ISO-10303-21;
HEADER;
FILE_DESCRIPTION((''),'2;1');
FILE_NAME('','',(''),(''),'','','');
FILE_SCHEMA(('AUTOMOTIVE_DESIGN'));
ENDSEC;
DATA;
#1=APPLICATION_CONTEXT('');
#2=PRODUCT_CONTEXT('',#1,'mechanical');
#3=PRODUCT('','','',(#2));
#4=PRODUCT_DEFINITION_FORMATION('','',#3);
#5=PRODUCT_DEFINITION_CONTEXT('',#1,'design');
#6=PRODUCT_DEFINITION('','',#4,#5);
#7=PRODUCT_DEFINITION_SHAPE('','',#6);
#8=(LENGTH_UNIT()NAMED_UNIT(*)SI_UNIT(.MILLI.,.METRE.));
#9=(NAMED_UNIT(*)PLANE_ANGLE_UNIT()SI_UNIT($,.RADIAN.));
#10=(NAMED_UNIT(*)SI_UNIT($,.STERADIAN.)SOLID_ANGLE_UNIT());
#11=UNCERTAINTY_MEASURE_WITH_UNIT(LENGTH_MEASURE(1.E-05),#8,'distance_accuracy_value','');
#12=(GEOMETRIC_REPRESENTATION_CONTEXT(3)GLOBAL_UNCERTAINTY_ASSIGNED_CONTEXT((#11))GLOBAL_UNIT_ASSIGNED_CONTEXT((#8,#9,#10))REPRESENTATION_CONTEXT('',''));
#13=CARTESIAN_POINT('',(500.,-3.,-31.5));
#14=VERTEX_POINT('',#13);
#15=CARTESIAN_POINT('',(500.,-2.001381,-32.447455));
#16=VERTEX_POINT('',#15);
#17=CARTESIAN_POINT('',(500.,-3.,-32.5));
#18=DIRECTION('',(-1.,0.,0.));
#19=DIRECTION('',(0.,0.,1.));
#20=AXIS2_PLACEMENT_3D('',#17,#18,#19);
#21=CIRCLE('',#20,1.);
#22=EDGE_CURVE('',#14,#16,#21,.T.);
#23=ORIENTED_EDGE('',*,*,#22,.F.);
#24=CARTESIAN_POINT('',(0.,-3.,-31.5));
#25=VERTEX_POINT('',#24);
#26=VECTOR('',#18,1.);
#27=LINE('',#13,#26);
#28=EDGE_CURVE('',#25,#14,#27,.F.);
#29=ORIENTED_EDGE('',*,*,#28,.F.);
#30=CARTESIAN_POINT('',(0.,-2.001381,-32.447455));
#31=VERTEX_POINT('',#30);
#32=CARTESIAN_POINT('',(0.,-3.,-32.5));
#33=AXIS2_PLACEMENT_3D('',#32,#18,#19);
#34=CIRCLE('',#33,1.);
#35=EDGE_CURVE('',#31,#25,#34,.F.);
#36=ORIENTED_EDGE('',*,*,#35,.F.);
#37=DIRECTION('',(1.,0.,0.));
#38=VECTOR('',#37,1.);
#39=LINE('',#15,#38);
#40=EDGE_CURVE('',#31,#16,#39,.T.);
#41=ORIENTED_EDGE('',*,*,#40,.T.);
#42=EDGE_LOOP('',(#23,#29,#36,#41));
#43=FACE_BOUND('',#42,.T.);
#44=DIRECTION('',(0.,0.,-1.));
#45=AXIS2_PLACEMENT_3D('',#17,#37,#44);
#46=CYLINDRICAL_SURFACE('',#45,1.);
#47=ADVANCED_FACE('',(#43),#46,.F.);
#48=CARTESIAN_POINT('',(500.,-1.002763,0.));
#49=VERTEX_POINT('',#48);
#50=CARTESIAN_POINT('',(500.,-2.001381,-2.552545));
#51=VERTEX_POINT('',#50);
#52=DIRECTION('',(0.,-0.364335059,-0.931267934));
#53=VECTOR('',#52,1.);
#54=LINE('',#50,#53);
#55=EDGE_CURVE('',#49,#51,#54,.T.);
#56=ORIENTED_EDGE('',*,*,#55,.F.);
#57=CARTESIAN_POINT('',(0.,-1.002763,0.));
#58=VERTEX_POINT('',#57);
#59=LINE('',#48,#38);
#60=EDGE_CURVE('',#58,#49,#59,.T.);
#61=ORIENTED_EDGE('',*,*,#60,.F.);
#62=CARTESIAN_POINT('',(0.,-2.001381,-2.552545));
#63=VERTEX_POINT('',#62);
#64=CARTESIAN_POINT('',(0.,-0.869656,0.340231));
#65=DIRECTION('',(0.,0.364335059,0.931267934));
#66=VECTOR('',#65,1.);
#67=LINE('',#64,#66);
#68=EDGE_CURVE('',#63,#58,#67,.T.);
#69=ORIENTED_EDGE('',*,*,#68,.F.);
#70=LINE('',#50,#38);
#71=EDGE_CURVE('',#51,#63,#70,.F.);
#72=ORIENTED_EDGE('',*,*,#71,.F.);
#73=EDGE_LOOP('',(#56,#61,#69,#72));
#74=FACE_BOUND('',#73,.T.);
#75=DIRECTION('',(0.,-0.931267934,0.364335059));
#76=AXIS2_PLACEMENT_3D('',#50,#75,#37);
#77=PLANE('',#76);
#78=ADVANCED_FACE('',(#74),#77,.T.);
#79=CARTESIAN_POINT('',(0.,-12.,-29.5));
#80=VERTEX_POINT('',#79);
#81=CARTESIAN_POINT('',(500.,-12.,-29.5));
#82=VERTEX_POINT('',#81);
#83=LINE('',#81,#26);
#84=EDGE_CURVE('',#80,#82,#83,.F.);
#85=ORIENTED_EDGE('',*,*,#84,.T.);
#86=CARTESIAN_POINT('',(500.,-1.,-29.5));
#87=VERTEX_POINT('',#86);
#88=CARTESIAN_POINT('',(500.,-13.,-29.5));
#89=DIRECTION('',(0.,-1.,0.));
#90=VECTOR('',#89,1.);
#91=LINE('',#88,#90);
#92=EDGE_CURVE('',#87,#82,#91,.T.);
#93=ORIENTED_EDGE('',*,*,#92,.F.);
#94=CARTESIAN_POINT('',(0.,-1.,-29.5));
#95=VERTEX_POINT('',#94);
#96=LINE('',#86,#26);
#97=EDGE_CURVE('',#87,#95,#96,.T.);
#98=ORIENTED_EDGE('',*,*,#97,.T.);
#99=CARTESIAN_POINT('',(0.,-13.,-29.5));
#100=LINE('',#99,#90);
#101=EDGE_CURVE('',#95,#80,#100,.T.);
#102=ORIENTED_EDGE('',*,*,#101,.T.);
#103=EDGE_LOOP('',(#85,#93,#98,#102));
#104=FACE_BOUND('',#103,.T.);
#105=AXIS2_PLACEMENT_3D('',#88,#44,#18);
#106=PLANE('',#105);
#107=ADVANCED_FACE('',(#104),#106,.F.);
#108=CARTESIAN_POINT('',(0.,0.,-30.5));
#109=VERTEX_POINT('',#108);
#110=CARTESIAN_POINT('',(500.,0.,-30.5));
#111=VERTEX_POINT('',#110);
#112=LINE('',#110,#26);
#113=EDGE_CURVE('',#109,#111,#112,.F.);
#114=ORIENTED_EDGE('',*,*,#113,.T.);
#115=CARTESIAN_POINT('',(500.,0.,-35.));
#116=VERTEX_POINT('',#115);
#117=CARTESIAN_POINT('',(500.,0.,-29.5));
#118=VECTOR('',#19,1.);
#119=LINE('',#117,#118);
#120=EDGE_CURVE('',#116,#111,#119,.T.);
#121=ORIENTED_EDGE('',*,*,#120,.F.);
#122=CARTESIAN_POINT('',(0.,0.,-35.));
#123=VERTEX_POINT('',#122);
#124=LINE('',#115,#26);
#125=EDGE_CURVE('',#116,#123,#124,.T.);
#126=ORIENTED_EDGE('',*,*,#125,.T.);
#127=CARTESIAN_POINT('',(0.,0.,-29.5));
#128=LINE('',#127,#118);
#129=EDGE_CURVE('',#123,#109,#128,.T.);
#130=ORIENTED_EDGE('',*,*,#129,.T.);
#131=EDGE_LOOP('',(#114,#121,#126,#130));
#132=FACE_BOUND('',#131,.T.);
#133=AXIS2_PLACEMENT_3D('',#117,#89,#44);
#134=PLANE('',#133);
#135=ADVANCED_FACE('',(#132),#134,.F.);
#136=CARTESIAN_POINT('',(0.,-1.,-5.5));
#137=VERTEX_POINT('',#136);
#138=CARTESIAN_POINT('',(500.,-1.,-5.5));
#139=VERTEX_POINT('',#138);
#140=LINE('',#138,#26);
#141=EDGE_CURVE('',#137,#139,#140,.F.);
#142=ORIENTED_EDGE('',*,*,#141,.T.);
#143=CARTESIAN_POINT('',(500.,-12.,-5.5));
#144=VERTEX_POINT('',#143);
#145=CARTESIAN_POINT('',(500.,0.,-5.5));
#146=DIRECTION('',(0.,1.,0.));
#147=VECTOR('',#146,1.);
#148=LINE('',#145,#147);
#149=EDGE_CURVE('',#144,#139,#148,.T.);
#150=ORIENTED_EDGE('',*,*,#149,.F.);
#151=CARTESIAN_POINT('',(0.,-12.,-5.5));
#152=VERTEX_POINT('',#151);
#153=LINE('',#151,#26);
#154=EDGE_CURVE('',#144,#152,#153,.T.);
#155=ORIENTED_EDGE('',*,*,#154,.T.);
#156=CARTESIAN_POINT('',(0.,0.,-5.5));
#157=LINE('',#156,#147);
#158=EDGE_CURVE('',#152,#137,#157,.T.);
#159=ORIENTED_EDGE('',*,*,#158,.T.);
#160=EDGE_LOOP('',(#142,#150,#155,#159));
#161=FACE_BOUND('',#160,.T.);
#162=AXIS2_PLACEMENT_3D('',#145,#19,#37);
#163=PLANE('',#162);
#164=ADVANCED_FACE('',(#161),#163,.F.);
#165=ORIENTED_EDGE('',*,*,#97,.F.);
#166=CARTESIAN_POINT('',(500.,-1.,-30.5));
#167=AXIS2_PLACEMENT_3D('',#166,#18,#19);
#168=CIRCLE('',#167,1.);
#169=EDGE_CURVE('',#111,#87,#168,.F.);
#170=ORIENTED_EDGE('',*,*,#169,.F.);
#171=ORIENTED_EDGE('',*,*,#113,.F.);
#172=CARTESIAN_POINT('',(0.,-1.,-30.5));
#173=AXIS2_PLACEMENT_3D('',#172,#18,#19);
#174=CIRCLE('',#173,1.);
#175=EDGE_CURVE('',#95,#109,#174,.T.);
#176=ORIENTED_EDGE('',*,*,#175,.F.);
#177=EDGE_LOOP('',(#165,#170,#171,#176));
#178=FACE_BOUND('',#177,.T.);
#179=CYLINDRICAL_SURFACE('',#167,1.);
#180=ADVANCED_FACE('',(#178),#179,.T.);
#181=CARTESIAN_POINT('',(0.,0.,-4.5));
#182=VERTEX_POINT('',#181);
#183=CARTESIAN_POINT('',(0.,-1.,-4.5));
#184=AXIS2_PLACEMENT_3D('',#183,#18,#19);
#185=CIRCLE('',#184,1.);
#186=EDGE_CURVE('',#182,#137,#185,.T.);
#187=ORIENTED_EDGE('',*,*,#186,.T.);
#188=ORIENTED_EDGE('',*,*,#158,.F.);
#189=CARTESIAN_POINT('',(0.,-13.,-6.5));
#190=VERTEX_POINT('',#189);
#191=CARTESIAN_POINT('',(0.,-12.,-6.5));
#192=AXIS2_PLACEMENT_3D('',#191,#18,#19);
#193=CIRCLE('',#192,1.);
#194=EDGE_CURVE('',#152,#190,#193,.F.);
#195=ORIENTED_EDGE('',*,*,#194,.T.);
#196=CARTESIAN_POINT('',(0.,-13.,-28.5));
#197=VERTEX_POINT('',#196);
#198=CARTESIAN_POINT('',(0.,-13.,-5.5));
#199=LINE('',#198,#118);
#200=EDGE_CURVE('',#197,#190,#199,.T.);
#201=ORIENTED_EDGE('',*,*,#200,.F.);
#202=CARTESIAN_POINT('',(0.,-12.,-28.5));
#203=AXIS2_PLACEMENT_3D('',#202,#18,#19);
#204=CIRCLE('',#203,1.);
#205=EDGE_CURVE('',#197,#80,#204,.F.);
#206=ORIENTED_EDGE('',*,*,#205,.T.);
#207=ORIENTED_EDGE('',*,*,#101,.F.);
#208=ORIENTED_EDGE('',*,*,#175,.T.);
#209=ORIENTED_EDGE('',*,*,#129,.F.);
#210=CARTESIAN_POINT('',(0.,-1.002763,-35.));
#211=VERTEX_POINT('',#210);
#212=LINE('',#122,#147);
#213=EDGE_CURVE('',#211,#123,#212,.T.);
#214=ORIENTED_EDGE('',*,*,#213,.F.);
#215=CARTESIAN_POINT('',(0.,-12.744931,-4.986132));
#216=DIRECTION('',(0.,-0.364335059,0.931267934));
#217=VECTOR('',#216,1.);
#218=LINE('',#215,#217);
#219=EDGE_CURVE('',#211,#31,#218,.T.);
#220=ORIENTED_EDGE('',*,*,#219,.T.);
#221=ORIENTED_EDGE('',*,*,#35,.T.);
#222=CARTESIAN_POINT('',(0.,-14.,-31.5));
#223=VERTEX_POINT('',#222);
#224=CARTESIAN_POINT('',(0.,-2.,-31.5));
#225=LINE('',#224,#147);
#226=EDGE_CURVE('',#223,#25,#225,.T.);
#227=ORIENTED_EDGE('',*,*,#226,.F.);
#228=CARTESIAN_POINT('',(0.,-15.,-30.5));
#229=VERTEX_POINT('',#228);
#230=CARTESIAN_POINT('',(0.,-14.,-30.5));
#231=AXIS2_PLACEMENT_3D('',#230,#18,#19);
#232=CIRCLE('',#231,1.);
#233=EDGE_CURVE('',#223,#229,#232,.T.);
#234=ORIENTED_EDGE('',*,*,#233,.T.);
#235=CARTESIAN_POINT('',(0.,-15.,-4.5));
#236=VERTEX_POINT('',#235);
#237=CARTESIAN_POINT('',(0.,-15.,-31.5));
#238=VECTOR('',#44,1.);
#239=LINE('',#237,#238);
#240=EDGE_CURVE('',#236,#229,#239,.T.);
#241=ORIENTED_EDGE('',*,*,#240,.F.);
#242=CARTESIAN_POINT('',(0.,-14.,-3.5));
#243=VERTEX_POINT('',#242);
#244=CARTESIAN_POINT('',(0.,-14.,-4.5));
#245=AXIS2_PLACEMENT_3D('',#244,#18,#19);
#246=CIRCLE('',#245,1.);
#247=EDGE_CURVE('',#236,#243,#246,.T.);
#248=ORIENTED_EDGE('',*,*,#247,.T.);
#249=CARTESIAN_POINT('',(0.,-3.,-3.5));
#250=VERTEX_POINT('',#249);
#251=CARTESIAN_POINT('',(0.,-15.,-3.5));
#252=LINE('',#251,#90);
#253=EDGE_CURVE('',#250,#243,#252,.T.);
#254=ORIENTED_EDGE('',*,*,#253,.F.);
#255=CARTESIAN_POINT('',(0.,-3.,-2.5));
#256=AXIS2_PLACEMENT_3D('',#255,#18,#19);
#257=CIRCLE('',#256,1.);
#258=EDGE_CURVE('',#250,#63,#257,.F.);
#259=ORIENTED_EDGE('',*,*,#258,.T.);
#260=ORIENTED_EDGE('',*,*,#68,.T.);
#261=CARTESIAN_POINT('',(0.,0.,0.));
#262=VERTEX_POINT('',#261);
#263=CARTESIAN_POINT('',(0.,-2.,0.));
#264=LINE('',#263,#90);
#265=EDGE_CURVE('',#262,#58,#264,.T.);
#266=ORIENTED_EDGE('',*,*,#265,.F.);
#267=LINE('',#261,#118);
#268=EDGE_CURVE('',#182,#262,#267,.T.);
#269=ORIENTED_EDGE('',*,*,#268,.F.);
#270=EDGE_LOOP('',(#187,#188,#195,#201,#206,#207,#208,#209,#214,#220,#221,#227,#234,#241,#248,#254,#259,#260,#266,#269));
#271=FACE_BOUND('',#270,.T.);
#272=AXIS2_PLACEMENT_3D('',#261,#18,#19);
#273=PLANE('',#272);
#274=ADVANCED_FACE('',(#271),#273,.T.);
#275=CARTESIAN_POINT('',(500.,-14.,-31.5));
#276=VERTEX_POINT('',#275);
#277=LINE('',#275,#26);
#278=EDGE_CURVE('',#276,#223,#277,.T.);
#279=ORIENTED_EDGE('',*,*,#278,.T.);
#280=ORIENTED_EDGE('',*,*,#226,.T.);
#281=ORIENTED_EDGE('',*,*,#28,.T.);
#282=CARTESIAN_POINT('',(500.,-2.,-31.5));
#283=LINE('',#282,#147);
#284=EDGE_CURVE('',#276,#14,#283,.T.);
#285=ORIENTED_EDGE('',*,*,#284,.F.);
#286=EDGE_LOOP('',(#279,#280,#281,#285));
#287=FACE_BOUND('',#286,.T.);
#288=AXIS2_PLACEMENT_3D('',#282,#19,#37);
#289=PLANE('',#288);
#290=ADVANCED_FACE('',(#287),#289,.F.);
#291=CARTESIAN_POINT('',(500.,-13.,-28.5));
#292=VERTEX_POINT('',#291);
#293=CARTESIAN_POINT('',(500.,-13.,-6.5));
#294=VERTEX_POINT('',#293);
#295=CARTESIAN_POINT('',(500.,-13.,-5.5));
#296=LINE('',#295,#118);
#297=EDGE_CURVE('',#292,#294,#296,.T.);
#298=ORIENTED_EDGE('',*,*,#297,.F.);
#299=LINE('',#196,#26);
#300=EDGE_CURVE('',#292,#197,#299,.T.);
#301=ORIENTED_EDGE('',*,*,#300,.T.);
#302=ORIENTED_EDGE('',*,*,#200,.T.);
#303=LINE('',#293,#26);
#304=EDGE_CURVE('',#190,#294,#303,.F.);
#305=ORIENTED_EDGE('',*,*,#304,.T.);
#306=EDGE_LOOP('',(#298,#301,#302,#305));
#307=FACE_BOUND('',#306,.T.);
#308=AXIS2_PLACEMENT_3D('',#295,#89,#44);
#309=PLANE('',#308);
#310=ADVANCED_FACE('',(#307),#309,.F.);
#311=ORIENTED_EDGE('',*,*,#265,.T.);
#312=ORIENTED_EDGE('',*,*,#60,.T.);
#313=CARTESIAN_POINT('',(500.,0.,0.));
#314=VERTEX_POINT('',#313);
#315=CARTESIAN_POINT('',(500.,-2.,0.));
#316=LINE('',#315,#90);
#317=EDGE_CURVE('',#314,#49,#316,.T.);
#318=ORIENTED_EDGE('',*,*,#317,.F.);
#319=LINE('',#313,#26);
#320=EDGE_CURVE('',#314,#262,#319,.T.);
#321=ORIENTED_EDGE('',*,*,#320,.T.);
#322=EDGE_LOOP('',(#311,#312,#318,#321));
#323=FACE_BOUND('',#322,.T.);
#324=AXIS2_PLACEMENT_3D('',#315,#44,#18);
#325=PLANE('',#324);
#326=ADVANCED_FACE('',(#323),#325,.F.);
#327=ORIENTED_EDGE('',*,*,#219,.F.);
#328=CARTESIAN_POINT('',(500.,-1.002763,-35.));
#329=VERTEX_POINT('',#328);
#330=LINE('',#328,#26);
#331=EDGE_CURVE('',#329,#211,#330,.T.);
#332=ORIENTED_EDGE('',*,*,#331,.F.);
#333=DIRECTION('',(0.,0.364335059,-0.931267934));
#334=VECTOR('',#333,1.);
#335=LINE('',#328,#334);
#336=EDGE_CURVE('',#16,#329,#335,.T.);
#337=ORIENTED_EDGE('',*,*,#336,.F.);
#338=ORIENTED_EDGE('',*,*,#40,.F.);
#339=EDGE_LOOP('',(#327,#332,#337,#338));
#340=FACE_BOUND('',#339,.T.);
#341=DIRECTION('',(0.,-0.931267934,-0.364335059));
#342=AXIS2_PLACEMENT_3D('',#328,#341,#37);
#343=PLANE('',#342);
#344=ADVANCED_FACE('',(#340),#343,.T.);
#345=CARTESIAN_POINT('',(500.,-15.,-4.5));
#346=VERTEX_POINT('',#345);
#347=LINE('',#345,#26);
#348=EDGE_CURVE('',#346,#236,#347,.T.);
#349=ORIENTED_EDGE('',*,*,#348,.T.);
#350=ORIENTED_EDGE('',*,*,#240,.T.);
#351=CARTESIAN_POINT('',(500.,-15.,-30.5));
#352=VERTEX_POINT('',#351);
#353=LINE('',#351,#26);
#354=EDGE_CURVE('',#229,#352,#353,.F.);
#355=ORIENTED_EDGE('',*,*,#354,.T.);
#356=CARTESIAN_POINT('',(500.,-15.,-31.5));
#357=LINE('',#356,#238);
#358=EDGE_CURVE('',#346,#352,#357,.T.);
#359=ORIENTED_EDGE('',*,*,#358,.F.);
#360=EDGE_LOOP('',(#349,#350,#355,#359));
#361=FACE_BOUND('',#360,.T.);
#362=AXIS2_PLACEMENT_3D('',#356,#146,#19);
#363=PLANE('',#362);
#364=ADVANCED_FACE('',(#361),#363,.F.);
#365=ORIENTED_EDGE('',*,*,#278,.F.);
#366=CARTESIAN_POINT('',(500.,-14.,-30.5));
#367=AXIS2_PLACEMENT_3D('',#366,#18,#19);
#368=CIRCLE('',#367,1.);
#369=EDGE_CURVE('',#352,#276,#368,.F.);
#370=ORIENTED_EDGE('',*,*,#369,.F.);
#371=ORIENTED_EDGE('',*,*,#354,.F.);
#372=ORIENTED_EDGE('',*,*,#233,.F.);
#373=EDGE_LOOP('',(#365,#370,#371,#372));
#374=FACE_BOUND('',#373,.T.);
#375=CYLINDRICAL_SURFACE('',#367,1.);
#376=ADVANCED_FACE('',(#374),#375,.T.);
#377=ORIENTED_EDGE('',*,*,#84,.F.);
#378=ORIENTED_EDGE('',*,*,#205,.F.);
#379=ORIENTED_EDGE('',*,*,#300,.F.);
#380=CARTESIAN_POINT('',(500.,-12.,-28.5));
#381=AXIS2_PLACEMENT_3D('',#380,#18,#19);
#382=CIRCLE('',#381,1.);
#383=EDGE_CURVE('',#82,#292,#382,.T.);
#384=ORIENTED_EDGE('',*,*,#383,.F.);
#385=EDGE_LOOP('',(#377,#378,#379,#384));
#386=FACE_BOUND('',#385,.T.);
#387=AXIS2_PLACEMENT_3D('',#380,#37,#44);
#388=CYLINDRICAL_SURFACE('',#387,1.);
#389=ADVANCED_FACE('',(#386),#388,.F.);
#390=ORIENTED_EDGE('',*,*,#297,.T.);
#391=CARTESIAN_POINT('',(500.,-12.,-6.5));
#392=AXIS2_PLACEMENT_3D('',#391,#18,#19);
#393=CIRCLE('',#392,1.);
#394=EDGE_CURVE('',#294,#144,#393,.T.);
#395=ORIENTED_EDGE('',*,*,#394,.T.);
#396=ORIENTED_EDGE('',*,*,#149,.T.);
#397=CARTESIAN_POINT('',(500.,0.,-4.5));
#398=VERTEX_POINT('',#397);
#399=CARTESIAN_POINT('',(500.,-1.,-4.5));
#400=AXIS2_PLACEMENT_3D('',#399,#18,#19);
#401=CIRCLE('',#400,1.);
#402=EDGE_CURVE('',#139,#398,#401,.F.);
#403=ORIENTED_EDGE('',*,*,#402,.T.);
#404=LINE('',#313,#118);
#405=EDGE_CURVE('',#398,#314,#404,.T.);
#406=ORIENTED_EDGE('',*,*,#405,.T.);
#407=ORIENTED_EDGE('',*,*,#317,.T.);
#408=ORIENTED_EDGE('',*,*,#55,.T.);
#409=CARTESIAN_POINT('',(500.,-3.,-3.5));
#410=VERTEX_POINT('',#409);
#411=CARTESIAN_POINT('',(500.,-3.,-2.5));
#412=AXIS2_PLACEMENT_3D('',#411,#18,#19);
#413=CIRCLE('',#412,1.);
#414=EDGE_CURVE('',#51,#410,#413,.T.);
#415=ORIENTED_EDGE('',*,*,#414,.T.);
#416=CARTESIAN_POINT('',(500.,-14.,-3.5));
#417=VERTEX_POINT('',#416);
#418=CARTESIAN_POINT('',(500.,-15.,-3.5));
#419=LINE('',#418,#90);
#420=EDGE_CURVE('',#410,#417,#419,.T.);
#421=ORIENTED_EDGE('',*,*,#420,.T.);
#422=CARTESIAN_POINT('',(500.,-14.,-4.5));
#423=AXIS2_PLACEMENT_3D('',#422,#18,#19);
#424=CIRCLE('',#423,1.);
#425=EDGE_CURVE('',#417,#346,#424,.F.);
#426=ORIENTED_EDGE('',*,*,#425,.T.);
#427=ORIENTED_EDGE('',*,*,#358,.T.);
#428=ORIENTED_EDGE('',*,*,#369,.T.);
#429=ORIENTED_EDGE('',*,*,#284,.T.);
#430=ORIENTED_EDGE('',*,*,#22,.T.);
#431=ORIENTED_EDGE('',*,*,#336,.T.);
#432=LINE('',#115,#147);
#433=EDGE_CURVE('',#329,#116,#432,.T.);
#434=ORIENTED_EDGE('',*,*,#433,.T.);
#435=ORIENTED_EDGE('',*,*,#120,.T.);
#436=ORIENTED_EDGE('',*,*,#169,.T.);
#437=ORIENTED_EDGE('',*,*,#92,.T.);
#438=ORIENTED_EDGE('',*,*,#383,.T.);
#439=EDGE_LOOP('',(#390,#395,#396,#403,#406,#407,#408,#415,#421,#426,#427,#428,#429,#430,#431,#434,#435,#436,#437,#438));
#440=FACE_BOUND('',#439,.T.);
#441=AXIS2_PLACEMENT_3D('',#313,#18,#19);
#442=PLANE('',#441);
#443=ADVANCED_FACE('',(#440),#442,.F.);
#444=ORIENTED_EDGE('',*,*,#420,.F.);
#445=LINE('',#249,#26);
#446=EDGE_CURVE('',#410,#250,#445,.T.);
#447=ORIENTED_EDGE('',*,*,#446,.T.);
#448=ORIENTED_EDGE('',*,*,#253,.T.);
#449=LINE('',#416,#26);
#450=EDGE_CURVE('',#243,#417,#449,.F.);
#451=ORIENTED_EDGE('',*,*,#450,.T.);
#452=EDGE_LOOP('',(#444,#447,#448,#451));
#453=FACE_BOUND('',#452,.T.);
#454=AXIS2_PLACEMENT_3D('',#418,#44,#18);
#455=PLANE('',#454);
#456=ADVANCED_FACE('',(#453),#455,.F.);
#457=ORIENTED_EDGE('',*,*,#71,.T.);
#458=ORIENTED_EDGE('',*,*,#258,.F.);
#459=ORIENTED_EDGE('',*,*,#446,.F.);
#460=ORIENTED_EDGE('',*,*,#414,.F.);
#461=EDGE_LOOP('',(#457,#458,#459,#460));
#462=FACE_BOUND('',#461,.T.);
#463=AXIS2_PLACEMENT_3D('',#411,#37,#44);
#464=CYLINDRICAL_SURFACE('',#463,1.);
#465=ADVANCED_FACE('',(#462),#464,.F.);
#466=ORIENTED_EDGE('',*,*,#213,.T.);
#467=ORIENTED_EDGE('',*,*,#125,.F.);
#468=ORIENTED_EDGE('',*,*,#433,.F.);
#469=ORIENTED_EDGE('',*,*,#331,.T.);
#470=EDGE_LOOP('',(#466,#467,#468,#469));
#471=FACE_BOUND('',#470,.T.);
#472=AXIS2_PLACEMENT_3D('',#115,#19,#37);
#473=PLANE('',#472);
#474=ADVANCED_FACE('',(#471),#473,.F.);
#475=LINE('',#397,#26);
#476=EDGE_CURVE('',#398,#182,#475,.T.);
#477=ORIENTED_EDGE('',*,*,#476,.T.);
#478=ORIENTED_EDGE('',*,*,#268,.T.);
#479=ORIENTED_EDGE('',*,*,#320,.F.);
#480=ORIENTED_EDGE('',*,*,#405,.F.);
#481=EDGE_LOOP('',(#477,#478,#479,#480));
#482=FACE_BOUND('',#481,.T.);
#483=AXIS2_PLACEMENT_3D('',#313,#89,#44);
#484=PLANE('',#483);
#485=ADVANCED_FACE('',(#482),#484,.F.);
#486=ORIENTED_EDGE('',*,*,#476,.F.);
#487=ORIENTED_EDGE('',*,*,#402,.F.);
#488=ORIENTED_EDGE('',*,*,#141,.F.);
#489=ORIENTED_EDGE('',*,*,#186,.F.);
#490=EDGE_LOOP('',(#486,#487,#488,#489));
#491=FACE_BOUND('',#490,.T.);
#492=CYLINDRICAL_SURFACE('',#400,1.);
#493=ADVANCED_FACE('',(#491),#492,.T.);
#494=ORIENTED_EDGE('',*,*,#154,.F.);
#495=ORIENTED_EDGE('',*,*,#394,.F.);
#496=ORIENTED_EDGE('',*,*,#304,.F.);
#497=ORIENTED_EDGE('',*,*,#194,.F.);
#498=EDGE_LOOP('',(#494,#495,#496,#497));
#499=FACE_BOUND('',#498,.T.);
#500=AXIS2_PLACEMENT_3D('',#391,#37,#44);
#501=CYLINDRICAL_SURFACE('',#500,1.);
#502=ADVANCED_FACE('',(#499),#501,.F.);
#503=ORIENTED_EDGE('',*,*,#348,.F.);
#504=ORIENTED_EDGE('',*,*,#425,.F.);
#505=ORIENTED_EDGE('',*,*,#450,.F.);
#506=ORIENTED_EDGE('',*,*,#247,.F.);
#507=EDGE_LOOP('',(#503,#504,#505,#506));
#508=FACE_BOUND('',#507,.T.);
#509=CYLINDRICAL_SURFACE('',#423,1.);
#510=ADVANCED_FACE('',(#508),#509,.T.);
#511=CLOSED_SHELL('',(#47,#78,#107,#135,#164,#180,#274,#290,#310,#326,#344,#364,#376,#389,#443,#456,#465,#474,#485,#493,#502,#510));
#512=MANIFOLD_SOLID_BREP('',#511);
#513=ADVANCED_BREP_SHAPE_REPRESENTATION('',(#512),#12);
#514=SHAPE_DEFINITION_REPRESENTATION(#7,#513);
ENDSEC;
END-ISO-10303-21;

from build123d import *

# Parameters (mm, degrees)
BOSS_EXTRU_1_DEPTH = 500
CONG_1_R           = 1
CHANFREIN1_DEPTH   = 500


with BuildPart() as part:
    # Esquisse1 → Boss.-Extru.1 (new body)
    with BuildSketch(Plane(origin=(0, 0, 0), x_dir=(0, 0, -1), z_dir=(1, 0, 0))):
        Polygon((0, 0), (5.5, 0), (5.5, -13), (29.5, -13), (29.5, 0), (35, 0), (35, -2), (31.5, -2), (31.5, -15), (3.5, -15), (3.5, -2), (0, -2), align=None)
    extrude(amount=BOSS_EXTRU_1_DEPTH)

    # Congé1
    cong_1_edges = [part.edges().sort_by_distance(p)[0] for p in [
        (250, 0, -5.5),
        (250, -13, -5.5),
        (250, -13, -29.5),
        (250, 0, -29.5),
        (250, -2, -31.5),
        (250, -15, -31.5),
        (250, -15, -3.5),
        (250, -2, -3.5),
    ]]
    fillet(cong_1_edges, radius=CONG_1_R)

    # Chanfrein1: read off the stored shape, not the designer's step
    # Chanfrein1 outline → Chanfrein1 (cut)
    with BuildSketch(Plane.YZ):
        with BuildLine():
            Line((-2.001381418, -2.552544532), (-1.002762836, 0))
            Line((-1.002762836, 0), (-2, 0))
            Line((-2, 0), (-2, -2.5))
            ThreePointArc((-2, -2.5), (-2.000345414, -2.526281344), (-2.001381418, -2.552544532))
        make_face()
        with BuildLine():
            Line((-1.002762836, -35), (-2.001381418, -32.447455468))
            ThreePointArc((-2.001381418, -32.447455468), (-2.000345414, -32.473718656), (-2, -32.5))
            Line((-2, -32.5), (-2, -35))
            Line((-2, -35), (-1.002762836, -35))
        make_face()
    extrude(amount=CHANFREIN1_DEPTH, mode=Mode.SUBTRACT)


solid = part.part
